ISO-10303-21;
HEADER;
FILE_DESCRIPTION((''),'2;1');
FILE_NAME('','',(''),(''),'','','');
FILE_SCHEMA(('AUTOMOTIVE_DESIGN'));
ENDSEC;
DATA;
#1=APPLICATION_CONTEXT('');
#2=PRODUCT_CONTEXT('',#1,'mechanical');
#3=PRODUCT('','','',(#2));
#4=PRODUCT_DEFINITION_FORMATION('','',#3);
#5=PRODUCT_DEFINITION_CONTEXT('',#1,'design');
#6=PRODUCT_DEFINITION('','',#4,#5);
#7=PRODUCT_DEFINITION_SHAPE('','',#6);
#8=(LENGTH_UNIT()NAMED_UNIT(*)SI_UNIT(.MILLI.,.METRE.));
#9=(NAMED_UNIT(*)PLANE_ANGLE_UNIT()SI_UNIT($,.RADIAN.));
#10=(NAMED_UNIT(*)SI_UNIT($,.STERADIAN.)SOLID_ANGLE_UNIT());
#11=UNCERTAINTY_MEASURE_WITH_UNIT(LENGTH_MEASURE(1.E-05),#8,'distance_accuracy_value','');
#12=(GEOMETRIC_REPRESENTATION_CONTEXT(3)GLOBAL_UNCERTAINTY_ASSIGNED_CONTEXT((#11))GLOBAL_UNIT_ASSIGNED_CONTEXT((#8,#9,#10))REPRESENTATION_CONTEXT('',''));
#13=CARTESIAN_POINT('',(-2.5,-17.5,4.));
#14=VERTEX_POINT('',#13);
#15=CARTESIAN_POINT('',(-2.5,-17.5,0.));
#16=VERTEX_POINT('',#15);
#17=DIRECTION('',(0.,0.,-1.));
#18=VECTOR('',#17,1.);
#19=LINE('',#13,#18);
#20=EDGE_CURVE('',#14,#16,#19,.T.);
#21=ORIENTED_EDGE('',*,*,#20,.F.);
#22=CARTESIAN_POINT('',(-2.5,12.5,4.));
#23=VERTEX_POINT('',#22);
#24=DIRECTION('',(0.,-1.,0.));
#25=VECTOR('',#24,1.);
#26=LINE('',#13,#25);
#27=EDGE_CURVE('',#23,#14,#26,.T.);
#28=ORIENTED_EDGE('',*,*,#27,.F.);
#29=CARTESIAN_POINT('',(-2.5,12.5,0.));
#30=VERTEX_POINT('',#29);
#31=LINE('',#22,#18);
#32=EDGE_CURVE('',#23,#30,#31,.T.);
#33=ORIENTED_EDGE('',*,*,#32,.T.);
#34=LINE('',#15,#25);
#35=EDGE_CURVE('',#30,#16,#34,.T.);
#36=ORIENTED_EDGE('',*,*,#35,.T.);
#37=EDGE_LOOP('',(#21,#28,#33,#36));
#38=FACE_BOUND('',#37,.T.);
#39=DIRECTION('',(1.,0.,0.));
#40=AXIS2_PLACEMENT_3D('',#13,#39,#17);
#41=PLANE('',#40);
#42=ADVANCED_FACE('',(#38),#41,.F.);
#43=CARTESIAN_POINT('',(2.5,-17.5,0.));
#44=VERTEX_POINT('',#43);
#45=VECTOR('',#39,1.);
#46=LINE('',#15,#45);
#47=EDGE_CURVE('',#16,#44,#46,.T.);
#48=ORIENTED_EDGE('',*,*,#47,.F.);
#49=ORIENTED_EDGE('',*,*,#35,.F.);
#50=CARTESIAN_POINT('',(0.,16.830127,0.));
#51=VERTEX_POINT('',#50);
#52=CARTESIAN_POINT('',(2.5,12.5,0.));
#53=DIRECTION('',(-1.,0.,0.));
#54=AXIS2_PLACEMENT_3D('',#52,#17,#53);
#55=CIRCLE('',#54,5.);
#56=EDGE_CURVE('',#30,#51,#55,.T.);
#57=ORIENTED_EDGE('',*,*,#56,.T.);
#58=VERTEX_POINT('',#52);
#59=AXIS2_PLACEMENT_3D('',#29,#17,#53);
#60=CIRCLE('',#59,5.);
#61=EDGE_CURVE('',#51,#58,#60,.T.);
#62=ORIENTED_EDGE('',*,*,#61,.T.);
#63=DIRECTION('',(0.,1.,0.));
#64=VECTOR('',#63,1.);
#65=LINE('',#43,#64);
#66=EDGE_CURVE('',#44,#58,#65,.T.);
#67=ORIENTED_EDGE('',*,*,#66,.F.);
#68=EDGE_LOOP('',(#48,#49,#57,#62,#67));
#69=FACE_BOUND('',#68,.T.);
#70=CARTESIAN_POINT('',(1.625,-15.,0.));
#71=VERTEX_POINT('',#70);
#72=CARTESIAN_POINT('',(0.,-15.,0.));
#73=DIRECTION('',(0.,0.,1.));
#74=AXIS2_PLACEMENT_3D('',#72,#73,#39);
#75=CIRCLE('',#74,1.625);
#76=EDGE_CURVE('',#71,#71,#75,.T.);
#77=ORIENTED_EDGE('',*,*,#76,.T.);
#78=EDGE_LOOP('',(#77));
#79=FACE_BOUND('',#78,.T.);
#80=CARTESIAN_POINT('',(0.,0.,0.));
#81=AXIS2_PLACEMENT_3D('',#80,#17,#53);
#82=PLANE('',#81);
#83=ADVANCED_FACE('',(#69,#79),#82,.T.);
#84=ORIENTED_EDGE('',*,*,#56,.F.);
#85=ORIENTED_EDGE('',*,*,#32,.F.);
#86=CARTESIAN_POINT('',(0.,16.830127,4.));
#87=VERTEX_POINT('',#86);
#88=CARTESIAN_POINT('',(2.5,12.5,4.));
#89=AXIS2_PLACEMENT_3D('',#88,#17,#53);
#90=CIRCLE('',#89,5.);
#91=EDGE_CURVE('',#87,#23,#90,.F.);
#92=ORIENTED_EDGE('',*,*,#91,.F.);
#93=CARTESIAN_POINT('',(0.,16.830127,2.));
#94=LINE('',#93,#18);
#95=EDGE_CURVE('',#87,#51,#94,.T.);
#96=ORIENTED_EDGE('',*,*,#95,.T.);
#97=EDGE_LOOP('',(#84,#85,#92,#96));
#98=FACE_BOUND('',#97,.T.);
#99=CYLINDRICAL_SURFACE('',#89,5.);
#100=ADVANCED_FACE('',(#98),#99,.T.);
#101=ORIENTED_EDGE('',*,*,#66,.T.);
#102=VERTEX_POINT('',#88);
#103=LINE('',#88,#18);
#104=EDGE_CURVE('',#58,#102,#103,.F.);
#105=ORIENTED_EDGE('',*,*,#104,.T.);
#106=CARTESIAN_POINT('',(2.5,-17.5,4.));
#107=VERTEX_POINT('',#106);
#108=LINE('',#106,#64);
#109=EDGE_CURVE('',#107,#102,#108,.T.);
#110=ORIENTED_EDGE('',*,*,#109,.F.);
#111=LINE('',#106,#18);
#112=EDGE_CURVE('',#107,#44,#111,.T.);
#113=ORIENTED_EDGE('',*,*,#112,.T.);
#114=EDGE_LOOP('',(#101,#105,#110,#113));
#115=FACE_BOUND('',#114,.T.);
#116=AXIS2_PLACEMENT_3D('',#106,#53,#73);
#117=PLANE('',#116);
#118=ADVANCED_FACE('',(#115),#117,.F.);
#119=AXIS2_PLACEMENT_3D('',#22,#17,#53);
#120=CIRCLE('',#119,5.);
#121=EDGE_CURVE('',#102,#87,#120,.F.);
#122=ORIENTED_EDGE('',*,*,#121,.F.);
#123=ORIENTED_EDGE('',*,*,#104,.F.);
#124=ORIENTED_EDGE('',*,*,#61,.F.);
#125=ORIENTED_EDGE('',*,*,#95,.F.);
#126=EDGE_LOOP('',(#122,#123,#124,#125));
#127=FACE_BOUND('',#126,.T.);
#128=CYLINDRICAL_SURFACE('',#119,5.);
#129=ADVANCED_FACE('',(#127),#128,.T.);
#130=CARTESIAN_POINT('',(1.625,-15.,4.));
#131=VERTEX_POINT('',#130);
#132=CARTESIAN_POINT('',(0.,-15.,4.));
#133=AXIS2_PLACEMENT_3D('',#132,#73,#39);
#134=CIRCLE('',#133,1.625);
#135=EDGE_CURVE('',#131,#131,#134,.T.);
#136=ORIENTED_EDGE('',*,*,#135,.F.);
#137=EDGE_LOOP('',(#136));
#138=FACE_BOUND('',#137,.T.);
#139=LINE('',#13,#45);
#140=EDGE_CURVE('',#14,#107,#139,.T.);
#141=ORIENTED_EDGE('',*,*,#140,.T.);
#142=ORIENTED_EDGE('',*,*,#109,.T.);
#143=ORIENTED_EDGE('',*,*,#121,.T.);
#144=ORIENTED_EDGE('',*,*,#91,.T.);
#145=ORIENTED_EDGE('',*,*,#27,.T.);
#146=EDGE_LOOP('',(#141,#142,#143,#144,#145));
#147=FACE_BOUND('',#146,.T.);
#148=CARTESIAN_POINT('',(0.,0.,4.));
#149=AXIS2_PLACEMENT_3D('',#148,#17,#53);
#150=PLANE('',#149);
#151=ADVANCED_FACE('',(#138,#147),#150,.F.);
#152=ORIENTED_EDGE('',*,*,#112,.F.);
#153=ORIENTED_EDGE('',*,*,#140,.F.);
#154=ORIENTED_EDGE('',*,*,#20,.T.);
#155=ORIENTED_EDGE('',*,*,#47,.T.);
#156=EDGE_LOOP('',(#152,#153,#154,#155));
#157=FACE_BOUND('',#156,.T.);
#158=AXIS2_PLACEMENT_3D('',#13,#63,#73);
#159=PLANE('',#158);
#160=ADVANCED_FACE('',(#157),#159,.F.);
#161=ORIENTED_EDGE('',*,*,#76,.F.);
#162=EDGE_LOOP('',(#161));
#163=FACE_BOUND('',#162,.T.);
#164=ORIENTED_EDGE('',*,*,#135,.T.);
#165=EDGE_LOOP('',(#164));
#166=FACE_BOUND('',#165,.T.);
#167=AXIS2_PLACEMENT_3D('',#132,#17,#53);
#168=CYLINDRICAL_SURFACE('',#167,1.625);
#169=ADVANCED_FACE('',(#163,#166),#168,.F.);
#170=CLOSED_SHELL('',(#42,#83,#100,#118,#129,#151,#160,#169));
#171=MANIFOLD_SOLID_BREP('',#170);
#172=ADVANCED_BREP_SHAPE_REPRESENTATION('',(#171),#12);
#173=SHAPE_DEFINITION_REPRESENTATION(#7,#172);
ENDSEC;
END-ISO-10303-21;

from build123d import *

# Parameters (mm, degrees)
SKETCH1_W           = 5
SKETCH1_H           = 35
SKETCH1_R           = 1.625
BOSS_EXTRUDE1_DEPTH = 4
FILLET1_R           = 5


with BuildPart() as part:
    # Sketch1 → Boss-Extrude1 (new body)
    with BuildSketch(Plane.XY):
        Rectangle(SKETCH1_W, SKETCH1_H)
        with Locations((0, -15)):
            Circle(SKETCH1_R, mode=Mode.SUBTRACT)
    extrude(amount=BOSS_EXTRUDE1_DEPTH)

    # Fillet1
    # the kernel refuses this fillet: 5 mm, written as the material it takes off along each edge
    with BuildSketch(Plane(origin=(-2.5, 17.5, -12.5), x_dir=(1, 0, 0), z_dir=(0, 0, 1)), Plane(origin=(2.5, 17.5, -12.5), x_dir=(0, -1, 0), z_dir=(0, 0, 1))) as fillet1_piece_1:
        with BuildLine():
            CenterArc((FILLET1_R, -FILLET1_R), FILLET1_R, 90, 90)
            Line((0, -FILLET1_R), (0, 0))
            Line((0, 0), (FILLET1_R, 0))
        make_face()
    extrude(amount=29, mode=Mode.SUBTRACT)


solid = part.part
